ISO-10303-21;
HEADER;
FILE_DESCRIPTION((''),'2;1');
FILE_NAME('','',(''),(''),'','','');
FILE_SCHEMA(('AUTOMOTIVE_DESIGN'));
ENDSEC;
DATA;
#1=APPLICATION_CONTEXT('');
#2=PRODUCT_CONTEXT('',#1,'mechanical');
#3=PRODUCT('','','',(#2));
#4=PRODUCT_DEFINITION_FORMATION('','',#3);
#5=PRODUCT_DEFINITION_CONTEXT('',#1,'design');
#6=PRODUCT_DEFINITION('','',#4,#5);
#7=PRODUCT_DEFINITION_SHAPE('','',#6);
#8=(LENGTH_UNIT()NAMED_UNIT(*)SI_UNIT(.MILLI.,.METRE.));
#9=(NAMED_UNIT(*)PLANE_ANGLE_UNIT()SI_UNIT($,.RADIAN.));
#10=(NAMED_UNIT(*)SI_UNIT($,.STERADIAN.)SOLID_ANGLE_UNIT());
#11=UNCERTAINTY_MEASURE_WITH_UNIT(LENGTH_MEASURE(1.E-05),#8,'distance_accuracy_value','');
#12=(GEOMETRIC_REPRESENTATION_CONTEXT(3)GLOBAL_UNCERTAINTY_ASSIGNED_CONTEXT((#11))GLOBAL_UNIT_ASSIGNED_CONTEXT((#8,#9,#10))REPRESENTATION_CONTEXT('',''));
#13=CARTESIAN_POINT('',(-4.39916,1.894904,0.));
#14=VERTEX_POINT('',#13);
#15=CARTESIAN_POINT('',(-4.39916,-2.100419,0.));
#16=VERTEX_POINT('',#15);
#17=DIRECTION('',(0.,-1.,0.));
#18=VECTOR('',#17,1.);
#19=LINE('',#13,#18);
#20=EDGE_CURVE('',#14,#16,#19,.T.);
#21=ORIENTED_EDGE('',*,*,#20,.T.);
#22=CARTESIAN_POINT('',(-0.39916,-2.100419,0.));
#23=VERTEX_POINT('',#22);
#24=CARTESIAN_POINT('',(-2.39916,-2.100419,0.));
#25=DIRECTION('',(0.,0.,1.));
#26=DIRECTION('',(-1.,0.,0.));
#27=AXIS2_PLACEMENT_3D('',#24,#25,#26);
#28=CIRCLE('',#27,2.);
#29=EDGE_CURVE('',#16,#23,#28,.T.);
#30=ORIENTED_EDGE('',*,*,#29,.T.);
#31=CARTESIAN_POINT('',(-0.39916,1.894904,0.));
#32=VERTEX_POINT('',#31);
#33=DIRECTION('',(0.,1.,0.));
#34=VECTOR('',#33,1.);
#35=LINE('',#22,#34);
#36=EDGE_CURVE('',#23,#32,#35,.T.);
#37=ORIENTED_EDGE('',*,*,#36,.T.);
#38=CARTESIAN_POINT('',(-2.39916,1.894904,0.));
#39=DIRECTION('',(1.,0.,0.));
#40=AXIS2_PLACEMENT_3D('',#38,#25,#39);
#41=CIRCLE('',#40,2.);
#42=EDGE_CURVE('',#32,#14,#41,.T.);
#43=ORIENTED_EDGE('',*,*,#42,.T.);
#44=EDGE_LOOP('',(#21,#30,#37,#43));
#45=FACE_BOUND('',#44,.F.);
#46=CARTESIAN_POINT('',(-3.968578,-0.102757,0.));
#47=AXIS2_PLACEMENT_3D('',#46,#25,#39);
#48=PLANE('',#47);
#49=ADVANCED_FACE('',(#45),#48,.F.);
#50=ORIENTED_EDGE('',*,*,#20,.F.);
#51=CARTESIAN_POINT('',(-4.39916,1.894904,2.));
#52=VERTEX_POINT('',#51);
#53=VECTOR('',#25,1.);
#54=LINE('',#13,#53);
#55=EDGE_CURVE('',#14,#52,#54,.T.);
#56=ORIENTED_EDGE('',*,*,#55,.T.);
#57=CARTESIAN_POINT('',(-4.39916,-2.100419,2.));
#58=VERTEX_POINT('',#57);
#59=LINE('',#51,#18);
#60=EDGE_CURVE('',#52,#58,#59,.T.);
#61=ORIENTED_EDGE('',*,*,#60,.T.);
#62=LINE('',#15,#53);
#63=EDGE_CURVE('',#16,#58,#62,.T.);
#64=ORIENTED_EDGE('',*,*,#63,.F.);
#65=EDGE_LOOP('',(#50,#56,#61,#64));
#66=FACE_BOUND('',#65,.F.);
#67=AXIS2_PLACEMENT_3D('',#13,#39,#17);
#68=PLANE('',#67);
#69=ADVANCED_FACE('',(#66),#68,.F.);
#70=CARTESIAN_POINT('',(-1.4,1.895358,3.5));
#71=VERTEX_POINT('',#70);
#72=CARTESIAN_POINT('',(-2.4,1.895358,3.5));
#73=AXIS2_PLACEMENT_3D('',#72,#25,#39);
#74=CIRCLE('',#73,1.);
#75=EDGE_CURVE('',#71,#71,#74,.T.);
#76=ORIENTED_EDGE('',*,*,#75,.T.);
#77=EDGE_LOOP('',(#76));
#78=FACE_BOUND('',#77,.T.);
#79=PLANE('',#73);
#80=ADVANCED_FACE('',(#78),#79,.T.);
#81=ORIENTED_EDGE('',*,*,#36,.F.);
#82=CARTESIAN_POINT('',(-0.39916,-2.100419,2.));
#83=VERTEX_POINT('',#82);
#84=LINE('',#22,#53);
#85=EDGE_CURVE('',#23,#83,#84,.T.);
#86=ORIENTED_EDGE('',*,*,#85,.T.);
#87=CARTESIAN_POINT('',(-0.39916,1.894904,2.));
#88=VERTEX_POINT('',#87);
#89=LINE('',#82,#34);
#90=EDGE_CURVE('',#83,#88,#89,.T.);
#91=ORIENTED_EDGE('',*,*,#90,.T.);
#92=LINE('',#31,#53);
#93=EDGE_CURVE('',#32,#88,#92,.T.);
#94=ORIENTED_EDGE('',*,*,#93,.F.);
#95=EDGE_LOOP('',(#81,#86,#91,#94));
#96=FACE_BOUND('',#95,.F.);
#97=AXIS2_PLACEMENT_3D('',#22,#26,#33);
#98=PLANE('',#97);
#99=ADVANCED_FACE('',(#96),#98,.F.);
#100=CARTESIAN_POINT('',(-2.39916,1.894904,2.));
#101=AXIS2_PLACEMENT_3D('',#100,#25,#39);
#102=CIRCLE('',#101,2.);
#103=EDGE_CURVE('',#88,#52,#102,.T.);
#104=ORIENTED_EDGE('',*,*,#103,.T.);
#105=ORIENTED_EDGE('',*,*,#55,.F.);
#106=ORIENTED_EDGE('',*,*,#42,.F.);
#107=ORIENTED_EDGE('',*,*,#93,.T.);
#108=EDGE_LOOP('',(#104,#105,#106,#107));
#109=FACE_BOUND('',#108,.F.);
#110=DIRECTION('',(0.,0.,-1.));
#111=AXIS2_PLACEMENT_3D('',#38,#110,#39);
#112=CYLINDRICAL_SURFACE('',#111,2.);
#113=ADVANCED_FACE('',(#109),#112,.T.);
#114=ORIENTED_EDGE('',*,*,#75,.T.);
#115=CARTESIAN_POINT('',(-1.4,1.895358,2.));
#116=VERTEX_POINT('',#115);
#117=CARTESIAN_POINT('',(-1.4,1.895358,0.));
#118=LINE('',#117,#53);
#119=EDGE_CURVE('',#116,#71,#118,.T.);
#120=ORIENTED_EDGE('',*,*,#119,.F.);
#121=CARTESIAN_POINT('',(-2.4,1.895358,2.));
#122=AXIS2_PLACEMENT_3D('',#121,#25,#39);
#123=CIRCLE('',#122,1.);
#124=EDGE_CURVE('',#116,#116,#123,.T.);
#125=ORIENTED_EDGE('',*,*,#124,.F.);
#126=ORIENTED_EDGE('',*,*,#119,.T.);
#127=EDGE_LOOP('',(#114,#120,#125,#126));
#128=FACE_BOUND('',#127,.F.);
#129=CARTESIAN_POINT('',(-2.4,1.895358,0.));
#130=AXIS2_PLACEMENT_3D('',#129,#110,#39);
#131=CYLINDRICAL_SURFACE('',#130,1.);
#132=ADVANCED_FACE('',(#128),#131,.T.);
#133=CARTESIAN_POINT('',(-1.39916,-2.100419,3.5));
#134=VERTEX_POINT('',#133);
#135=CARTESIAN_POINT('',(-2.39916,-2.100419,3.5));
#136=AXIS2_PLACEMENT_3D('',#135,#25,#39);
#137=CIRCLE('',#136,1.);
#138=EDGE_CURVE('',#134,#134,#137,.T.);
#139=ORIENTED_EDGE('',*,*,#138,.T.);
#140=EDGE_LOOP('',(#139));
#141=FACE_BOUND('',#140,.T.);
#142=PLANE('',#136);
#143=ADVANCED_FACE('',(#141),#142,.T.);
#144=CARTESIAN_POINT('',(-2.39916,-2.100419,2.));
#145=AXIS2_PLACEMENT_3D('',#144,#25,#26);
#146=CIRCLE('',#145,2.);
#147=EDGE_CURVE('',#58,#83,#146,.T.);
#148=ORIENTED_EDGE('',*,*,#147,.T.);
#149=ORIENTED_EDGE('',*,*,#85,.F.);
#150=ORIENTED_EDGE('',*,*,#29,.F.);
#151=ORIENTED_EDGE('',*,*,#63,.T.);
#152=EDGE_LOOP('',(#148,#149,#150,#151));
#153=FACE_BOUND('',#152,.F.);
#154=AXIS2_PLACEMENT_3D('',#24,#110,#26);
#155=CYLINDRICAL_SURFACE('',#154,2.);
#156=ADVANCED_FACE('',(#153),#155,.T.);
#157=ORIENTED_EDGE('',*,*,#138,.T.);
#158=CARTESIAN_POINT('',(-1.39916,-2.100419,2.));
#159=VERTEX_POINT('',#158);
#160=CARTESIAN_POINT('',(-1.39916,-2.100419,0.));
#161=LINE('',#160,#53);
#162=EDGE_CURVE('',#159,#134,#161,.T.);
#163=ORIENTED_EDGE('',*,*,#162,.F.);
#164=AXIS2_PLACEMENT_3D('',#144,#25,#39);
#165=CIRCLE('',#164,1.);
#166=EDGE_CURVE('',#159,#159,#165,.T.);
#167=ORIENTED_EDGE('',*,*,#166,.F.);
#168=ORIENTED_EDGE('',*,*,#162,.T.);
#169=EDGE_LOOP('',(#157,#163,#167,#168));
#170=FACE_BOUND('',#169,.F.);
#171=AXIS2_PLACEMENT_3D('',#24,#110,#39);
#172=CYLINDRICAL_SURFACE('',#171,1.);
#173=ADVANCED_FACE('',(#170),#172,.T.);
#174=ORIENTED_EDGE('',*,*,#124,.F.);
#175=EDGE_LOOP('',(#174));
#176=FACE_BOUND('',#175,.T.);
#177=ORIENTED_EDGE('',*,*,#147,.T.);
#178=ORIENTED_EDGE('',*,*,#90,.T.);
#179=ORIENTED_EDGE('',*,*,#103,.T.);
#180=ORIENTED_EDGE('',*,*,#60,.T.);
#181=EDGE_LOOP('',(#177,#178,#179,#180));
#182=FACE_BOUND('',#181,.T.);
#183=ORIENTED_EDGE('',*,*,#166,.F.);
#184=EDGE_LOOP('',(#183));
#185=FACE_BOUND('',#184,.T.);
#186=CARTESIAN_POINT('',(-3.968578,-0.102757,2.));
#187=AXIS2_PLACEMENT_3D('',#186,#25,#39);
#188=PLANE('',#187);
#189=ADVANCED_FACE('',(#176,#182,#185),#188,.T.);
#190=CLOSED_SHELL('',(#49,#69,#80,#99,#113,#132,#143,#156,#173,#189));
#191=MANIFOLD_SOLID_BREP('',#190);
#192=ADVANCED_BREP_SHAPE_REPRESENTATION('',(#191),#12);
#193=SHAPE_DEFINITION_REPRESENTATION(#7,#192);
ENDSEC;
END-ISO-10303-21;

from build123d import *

# Parameters (mm, degrees)
F0_R     = 1
F1_DEPTH = 3.5
F2_DEPTH = 2
F3_DEPTH = 2


# Not quite as in the source:
# - a feature names something its author has since deleted; it is built from what else it names


with BuildPart() as f1:
    # F0 (on Top) → F1 (new body)
    with BuildSketch(Plane.XY):
        with Locations((-2.3999998812, 1.8953582125)):
            Circle(F0_R)
    extrude(amount=F1_DEPTH)



with BuildPart() as f1b:
    # F0 (on Top) → F1, piece 2 (new body)
    with BuildSketch(Plane.XY):
        with Locations((-2.3991598333, -2.1004185153)):
            Circle(F0_R)
    extrude(amount=F1_DEPTH)


with BuildPart() as f1_1:
    add(f1.part)

    add(f1b.part)  # F2 merges F1b
    # F0 (on Top) → F2 (join)
    with BuildSketch(Plane.XY):
        with BuildLine():
            ThreePointArc((-2.4958517574, -0.1027572147), (-3.8471556634, -0.7208141967), (-4.3991598333, -2.1004185153))
            ThreePointArc((-4.3991598333, -2.1004185153), (-2.3991598333, -4.1004185153), (-0.3991598333, -2.1004185153))
            ThreePointArc((-0.3991598333, -2.1004185153), (-0.9511640032, -0.7208141967), (-2.3024679093, -0.1027572147))
            ThreePointArc((-2.3024679093, -0.1027572147), (-2.3991598333, -0.1050959142), (-2.4958517574, -0.1027572147))
        make_face()
        with Locations((-2.3991598333, -2.1004185153)):
            Circle(F0_R, mode=Mode.SUBTRACT)
        with BuildLine():
            ThreePointArc((-2.3024679093, -0.1027572147), (-0.9511640032, -0.7208141967), (-0.3991598333, -2.1004185153))
            Line((-0.3991598333, -2.1004185153), (-0.3991598333, 1.8949040858))
            ThreePointArc((-0.3991598333, 1.8949040858), (-0.9511640032, 0.5152997672), (-2.3024679093, -0.1027572147))
        make_face()
        with BuildLine():
            ThreePointArc((-4.3991598333, 1.8949040858), (-3.8471556634, 0.5152997672), (-2.4958517574, -0.1027572147))
            ThreePointArc((-2.4958517574, -0.1027572147), (-2.3991598333, -0.1004185153), (-2.3024679093, -0.1027572147))
            ThreePointArc((-2.3024679093, -0.1027572147), (-0.9511640032, 0.5152997672), (-0.3991598333, 1.8949040858))
            ThreePointArc((-0.3991598333, 1.8949040858), (-2.3991598333, 3.8949040858), (-4.3991598333, 1.8949040858))
        make_face()
        with Locations((-2.3999998812, 1.8953582125)):
            Circle(F0_R, mode=Mode.SUBTRACT)
        with BuildLine():
            ThreePointArc((-2.3024679093, -0.1027572147), (-2.3991598333, -0.1004185153), (-2.4958517574, -0.1027572147))
            ThreePointArc((-2.4958517574, -0.1027572147), (-2.3991598333, -0.1050959142), (-2.3024679093, -0.1027572147))
        make_face()
    extrude(amount=F2_DEPTH)

    # F0 (on Top) → F3 (join)
    with BuildSketch(Plane.XY):
        with BuildLine():
            Line((-4.3991598333, 1.8949040858), (-4.3991598333, -2.1004185153))
            ThreePointArc((-4.3991598333, -2.1004185153), (-3.8471556634, -0.7208141967), (-2.4958517574, -0.1027572147))
            ThreePointArc((-2.4958517574, -0.1027572147), (-3.8471556634, 0.5152997672), (-4.3991598333, 1.8949040858))
        make_face()
    extrude(amount=F3_DEPTH)


solid = f1_1.part
